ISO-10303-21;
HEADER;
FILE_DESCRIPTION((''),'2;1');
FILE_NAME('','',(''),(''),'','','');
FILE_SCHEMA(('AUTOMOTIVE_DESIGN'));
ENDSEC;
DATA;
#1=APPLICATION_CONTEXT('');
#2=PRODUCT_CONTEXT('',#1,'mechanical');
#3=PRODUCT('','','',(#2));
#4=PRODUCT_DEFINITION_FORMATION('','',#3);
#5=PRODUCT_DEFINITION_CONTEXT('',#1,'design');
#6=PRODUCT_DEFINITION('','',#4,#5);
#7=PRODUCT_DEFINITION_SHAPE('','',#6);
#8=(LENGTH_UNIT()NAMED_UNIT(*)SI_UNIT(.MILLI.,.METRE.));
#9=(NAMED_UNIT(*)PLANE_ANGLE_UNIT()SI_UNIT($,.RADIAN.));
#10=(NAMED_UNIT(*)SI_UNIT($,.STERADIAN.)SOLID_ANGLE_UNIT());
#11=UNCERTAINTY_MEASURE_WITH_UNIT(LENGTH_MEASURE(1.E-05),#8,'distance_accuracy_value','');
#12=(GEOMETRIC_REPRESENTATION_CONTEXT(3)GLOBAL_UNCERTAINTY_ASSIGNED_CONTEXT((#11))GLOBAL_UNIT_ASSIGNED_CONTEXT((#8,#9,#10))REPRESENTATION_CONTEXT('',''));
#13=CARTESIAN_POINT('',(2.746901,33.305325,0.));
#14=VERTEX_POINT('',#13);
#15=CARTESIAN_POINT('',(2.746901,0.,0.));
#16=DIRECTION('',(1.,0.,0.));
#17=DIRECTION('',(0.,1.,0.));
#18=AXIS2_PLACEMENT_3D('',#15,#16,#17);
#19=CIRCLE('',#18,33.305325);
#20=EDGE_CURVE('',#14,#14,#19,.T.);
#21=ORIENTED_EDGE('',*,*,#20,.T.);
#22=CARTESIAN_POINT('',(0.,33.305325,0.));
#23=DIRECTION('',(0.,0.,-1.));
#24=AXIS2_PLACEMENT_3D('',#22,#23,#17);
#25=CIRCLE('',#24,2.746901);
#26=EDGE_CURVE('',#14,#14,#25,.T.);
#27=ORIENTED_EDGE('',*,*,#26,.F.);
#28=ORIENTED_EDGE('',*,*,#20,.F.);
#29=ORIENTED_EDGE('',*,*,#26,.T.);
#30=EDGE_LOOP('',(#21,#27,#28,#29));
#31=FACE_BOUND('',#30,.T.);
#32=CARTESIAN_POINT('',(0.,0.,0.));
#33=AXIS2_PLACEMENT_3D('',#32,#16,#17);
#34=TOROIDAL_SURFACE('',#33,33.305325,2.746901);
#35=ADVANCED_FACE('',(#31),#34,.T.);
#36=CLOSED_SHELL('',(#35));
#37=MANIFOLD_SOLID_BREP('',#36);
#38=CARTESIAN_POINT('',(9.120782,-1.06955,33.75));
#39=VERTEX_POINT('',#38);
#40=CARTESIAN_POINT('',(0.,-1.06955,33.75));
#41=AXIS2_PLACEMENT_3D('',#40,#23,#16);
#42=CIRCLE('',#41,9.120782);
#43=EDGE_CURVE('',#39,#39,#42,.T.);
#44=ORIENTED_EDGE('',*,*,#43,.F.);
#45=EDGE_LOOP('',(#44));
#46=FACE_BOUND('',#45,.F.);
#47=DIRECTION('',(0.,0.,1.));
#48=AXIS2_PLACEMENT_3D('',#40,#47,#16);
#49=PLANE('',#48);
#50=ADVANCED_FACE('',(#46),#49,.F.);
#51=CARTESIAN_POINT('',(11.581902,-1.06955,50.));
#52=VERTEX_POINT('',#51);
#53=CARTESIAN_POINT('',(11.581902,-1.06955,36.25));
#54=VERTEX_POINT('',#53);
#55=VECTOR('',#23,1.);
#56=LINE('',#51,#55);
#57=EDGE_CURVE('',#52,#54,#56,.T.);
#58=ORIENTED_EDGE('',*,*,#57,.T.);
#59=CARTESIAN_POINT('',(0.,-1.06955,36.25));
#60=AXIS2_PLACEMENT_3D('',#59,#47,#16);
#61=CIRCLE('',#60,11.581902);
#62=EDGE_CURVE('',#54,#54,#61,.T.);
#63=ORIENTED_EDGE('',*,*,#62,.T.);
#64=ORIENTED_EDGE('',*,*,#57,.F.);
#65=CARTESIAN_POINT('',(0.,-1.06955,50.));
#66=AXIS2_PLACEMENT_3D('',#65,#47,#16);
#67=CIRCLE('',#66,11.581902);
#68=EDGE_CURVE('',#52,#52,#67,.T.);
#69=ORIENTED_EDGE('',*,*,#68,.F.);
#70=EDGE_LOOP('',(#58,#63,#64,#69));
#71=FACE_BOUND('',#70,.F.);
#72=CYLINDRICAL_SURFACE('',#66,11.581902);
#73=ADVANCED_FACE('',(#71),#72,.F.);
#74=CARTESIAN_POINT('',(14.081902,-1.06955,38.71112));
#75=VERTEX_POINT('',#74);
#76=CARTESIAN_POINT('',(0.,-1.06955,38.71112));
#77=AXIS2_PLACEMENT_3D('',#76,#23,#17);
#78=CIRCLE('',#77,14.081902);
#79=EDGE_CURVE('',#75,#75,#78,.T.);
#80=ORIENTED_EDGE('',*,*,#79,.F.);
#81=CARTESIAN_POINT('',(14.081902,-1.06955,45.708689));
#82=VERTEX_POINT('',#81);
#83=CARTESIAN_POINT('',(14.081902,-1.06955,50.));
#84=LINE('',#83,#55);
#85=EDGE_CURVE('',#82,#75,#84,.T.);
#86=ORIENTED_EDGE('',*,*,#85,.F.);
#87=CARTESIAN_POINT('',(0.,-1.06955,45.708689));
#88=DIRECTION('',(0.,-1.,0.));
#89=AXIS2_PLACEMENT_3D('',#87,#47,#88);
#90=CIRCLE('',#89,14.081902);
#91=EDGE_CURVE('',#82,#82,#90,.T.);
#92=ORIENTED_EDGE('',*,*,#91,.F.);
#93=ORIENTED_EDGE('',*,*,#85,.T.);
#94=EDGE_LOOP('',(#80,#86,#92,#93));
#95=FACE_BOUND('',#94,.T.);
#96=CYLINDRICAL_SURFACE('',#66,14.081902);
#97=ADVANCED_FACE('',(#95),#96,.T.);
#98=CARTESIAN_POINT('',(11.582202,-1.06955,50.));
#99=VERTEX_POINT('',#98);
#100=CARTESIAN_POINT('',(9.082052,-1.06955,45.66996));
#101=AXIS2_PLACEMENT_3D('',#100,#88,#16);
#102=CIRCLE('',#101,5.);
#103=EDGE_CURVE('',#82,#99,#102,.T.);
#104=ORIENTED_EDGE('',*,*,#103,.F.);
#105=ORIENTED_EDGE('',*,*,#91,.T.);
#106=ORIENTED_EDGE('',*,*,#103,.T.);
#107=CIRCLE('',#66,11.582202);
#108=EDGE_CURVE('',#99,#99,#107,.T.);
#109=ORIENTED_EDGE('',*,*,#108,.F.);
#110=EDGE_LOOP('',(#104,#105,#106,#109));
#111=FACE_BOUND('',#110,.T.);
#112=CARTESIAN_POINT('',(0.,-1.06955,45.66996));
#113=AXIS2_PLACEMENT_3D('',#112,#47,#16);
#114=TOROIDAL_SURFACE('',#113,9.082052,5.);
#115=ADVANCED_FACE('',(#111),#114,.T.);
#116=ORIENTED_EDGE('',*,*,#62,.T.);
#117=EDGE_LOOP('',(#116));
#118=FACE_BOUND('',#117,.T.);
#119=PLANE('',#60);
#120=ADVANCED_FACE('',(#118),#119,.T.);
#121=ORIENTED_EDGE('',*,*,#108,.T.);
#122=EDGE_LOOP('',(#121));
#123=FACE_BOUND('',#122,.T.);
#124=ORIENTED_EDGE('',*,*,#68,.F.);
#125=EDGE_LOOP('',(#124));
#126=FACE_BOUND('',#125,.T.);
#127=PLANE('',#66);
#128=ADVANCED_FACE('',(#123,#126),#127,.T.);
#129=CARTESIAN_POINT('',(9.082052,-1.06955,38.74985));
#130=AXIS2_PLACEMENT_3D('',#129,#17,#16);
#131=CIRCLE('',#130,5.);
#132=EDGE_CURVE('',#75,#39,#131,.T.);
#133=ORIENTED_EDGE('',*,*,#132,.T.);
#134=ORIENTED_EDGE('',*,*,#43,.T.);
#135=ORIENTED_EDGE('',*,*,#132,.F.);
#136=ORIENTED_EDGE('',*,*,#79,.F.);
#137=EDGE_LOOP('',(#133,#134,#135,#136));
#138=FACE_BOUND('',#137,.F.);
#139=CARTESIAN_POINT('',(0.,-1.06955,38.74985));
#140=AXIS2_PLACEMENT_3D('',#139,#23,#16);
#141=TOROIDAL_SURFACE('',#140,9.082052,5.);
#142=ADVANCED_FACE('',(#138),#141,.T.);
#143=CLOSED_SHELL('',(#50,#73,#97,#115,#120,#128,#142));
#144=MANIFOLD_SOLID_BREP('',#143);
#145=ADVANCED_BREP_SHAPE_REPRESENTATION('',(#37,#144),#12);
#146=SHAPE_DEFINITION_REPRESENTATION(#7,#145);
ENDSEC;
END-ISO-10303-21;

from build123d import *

# Parameters (mm, degrees)
F1_R     = 2.7469010715
F4_R     = 14.0819021009
F5_DEPTH = 16.25
F6_T     = -2.5


# Not quite as in the source:
# - a fillet or chamfer that OpenCascade refuses, or shapes differently, is made with other operations: its cross-section is extruded or revolved along the edge and cut away or added


with BuildPart() as f2:
    # F2: sweep along a path in F0
    with BuildLine(Plane.YZ) as f2_path:
        CenterArc((0, 0), 34.0842518569, 0, 360)
    # F1 (on Top) → F2 (sweep)
    with BuildSketch(Plane.XY):
        with Locations((0, 33.305324614)):
            Circle(F1_R)
    sweep(path=f2_path.line)


with BuildPart() as f5:
    # F4 (on offset) → F5 (new body)
    with BuildSketch(Plane.XY.offset(50)):
        with Locations((0, -1.069550286)):
            Circle(F4_R)
    extrude(amount=-F5_DEPTH)

    # F6
    f6_openings = [f5.faces().sort_by_distance(p)[0] for p in [
        (0, -1.06955, 50),
    ]]
    offset(amount=F6_T, openings=f6_openings)

    # F7: fillet of radius 5 on 2 edges, made by hand

    # F7_s1 → F7_t2 (revolve, cut)
    with BuildSketch(Plane.XZ.offset(1.069550286)):
        with BuildLine():
            ThreePointArc((14.0820521009, 45.6699595845), (13.4121574685, 48.1699970853), (11.5819770987, 50.0001299051))
            Line((11.5819770987, 50.0001299051), (11.6319755986, 50.0867333115))
            ThreePointArc((11.6319755986, 50.0867333115), (12.8319395998, 50.1), (14.0819021009, 50.1))
            Line((14.0819021009, 50.1), (14.1819021009, 50))
            ThreePointArc((14.1819021009, 50), (14.1819021009, 47.8349797922), (14.1820521009, 45.6699595845))
            Line((14.1820521009, 45.6699595845), (14.0820521009, 45.6699595845))
        make_face()
    revolve(axis=Axis((0, -1.069550286, 50), (0, 0, 1)), mode=Mode.SUBTRACT)

    # F7_s3 → F7_t4 (revolve, cut)
    with BuildSketch(Plane.XZ.offset(1.069550286)):
        with BuildLine():
            ThreePointArc((14.0820521009, 38.74985), (12.6175860068, 35.2143160941), (9.0820521009, 33.74985))
            Line((9.0820521009, 33.74985), (9.0820521009, 33.64985))
            ThreePointArc((9.0820521009, 33.64985), (11.5819771009, 33.65), (14.0819021009, 33.65))
            Line((14.0819021009, 33.65), (14.1819021009, 33.75))
            ThreePointArc((14.1819021009, 33.75), (14.1819021009, 36.249925), (14.1820521009, 38.74985))
            Line((14.1820521009, 38.74985), (14.0820521009, 38.74985))
        make_face()
    revolve(axis=Axis((0, -1.069550286, 33.75), (0, 0, 1)), mode=Mode.SUBTRACT)


solid = Compound([f2.part, f5.part])
